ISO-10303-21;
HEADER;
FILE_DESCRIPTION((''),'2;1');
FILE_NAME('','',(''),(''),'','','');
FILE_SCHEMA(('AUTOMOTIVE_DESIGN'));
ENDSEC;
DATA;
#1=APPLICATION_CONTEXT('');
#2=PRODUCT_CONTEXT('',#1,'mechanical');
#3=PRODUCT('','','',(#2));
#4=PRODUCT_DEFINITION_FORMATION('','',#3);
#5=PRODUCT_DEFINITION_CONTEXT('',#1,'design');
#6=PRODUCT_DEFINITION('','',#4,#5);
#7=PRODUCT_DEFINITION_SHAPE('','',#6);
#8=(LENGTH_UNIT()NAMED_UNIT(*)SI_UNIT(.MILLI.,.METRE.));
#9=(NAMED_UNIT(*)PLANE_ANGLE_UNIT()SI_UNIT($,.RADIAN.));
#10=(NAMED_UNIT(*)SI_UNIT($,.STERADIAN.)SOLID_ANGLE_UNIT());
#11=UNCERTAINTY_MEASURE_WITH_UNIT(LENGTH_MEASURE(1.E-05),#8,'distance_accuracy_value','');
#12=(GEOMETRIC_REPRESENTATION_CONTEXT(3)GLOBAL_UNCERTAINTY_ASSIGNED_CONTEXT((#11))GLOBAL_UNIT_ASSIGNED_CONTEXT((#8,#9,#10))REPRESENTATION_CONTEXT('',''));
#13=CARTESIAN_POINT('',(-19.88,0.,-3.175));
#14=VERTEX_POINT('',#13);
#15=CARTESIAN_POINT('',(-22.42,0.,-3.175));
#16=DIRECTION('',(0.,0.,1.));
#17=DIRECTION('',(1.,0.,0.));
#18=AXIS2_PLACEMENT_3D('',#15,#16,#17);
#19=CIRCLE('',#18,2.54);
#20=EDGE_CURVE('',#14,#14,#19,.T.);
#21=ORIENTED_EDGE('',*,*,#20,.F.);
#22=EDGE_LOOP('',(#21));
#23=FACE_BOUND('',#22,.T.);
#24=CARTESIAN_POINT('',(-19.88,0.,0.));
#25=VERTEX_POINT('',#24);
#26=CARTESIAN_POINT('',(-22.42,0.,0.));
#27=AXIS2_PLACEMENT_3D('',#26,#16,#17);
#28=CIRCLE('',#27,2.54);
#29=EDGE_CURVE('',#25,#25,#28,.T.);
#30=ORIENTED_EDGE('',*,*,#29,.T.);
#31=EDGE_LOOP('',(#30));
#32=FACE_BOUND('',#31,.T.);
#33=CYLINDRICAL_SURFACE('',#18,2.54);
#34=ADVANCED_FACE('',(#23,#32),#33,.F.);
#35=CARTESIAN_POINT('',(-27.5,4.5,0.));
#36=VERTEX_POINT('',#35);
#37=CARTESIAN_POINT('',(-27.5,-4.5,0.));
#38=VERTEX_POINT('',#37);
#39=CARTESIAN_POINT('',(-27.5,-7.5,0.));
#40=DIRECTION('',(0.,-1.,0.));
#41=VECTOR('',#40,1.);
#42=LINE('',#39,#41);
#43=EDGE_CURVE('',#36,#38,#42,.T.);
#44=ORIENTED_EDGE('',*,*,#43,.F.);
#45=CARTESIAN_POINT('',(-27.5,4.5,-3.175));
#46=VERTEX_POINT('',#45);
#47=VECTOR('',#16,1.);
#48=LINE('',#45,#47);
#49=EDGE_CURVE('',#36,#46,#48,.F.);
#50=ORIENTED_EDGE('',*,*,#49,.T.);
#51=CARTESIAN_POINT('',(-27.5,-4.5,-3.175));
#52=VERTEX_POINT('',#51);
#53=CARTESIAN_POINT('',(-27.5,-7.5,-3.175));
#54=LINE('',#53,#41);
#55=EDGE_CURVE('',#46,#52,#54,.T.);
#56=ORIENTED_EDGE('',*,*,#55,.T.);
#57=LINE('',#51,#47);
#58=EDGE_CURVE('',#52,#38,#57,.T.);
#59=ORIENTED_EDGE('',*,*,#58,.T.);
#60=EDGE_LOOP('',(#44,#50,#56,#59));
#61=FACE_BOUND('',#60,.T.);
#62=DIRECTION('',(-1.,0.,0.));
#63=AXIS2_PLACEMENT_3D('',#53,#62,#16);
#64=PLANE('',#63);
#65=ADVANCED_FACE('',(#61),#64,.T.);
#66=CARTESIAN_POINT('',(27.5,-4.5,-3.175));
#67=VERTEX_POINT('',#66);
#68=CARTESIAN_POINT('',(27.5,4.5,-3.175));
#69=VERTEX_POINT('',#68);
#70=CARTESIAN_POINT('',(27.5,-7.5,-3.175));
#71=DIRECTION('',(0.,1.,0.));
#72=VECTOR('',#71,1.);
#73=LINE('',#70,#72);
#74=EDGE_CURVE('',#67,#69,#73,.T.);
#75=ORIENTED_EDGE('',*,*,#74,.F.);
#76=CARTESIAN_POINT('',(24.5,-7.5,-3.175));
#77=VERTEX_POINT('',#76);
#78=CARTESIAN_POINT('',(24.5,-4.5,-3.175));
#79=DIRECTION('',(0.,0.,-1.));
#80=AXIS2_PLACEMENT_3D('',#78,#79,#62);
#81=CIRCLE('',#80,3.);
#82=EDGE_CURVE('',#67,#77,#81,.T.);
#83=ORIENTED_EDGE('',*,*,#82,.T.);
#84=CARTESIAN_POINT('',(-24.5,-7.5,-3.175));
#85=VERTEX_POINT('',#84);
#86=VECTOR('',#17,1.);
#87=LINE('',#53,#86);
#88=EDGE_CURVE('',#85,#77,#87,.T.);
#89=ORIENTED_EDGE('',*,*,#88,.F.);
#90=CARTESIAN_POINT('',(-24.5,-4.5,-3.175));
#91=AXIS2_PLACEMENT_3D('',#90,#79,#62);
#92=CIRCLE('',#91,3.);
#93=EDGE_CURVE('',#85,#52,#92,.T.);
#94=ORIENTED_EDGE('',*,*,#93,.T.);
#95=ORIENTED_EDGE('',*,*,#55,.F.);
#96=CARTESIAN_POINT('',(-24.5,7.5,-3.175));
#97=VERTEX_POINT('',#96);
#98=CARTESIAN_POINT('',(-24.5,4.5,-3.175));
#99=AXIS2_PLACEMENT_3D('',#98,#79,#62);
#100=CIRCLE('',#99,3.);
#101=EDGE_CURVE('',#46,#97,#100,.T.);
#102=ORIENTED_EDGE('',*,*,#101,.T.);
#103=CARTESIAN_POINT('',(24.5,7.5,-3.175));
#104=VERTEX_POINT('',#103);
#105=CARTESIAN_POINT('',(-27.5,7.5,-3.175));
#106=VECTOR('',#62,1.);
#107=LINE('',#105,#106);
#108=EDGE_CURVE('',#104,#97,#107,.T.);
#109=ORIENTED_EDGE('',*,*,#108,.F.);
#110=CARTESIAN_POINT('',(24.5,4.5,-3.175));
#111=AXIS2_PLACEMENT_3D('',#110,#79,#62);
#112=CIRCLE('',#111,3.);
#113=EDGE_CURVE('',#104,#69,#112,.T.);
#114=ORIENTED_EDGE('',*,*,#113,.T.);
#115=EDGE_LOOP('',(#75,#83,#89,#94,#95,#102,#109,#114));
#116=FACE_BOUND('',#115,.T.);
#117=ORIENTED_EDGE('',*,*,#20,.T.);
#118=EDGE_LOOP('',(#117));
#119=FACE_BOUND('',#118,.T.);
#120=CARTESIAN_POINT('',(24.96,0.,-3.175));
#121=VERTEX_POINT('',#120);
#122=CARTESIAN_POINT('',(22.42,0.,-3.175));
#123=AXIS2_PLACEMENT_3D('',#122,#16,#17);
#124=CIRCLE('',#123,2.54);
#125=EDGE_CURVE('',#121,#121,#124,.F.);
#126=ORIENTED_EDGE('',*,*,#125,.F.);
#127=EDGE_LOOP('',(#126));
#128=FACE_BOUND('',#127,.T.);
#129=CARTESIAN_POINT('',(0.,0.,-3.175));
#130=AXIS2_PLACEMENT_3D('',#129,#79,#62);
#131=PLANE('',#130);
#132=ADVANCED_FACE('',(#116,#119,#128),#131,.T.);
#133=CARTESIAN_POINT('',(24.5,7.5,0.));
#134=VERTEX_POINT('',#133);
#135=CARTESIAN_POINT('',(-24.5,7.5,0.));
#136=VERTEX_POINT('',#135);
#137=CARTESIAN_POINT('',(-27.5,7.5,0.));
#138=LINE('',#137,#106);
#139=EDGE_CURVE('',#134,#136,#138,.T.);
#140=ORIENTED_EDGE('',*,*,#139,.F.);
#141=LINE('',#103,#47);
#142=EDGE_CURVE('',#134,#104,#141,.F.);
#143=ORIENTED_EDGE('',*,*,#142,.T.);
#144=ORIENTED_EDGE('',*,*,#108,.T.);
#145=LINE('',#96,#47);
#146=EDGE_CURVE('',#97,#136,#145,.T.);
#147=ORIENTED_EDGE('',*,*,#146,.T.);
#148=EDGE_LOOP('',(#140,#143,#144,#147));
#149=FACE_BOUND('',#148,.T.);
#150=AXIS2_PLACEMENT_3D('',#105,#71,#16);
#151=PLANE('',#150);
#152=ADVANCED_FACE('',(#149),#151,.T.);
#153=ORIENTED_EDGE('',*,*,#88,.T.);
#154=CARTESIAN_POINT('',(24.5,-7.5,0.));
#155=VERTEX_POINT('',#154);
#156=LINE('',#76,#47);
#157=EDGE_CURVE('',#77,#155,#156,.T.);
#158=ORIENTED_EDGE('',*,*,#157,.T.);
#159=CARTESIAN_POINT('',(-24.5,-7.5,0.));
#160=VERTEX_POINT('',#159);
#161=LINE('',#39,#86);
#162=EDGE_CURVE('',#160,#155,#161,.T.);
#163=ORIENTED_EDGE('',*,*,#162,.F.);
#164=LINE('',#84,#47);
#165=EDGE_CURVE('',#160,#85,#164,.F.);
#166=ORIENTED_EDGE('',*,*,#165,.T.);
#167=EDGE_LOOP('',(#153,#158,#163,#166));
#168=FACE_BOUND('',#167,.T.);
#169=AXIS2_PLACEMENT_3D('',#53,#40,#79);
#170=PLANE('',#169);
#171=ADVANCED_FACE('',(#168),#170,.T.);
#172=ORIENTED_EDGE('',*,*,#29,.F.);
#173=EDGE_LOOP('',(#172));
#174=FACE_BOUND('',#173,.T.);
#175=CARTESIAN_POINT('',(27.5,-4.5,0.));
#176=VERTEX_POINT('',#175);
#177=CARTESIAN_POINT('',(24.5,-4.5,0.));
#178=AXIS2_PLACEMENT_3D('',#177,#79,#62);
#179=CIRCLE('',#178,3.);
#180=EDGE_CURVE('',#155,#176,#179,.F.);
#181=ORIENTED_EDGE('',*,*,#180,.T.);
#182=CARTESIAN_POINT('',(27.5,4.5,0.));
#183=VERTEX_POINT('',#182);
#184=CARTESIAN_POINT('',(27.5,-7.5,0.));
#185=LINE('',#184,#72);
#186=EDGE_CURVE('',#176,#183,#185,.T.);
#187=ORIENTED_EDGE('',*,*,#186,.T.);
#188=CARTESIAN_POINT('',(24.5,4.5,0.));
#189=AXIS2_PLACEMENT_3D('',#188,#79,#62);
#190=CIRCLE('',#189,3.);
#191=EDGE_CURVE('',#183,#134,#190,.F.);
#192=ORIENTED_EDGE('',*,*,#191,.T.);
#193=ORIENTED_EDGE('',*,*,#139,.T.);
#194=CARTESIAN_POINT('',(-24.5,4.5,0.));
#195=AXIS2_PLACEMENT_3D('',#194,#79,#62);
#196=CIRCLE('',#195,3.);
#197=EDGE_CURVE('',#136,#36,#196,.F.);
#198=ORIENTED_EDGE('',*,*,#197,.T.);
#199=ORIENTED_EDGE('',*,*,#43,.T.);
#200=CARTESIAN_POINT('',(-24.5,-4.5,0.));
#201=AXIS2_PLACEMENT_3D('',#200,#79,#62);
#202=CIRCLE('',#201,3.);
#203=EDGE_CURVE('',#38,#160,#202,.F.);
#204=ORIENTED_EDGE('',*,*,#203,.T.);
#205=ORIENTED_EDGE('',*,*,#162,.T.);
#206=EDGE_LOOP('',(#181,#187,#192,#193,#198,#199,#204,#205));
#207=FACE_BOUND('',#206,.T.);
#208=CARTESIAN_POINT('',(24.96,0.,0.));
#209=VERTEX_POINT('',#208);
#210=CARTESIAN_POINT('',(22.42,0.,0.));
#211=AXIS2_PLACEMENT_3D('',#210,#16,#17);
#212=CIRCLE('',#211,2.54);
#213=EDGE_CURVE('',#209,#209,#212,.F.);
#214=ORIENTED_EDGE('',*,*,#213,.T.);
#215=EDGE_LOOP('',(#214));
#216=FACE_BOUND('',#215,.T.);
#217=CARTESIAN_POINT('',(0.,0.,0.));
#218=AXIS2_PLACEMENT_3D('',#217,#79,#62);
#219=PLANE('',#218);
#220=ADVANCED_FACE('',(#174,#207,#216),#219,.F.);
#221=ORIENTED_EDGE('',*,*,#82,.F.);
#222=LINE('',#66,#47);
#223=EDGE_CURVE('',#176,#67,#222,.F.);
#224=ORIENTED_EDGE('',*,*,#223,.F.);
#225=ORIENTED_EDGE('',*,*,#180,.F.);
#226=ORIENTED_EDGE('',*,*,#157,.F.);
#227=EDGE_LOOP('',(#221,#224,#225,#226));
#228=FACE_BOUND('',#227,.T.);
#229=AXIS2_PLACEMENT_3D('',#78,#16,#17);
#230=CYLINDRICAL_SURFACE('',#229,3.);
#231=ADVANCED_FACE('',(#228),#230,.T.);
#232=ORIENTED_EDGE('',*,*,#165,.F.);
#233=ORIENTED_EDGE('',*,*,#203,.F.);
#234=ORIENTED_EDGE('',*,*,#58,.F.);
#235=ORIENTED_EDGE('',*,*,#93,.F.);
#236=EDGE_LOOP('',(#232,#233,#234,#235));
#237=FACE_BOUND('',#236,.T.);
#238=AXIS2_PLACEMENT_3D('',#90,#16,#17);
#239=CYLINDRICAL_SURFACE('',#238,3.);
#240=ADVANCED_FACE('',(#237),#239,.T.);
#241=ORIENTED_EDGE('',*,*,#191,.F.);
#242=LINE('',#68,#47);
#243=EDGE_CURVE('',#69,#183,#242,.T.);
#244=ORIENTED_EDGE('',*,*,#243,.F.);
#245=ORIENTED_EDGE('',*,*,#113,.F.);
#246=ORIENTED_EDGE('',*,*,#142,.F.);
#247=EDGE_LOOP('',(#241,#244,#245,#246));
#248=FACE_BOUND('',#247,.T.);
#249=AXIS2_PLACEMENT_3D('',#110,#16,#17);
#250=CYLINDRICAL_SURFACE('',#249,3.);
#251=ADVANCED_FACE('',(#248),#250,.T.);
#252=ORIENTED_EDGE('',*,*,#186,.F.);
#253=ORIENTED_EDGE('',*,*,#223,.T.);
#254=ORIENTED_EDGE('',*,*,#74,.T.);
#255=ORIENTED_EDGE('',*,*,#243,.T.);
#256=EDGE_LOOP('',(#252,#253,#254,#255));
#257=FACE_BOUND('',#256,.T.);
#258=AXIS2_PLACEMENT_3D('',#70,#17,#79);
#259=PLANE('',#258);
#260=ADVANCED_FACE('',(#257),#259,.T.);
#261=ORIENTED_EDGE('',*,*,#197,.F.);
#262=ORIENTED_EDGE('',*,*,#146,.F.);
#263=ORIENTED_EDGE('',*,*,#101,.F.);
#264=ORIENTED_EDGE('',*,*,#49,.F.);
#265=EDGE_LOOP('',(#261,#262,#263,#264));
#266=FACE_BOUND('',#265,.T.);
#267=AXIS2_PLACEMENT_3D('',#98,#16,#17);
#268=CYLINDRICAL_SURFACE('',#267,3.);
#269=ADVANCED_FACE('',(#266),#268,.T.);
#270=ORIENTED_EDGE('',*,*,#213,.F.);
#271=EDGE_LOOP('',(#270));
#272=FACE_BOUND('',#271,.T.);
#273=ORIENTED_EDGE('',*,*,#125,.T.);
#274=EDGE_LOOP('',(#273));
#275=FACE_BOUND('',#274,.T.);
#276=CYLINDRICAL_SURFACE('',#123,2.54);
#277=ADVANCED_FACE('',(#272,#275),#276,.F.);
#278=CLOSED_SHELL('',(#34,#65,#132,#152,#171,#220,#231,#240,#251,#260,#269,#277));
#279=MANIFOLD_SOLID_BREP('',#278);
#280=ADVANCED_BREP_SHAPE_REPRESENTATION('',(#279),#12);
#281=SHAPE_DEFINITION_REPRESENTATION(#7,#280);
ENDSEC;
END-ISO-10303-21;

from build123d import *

# Parameters (mm, degrees)
SKETCH1_W          = 55
SKETCH1_H          = 15
BASE_FLANGE1_DEPTH = 3.175
FILLET1_R          = 3
SKETCH7_R          = 2.54
CUT_EXTRUDE1_DEPTH = 29.680666397


# Sheet-metal steps are written as plain solids
with BuildPart() as part:
    # Sketch1 → Base-Flange1 (new body)
    with BuildSketch(Plane.XY):
        Rectangle(SKETCH1_W, SKETCH1_H)
    extrude(amount=-BASE_FLANGE1_DEPTH)

    # Fillet1
    fillet1_edges = [part.edges().sort_by_distance(p)[0] for p in [
        (27.5, -7.5, -1.5875),
        (-27.5, -7.5, -1.5875),
        (-27.5, 7.5, -1.5875),
        (27.5, 7.5, -1.5875),
    ]]
    fillet(fillet1_edges, radius=FILLET1_R)

    # Sketch7 → Cut-Extrude1 (cut, through all)
    with BuildSketch(Plane.XY):
        with Locations((-22.42, 0)):
            Circle(SKETCH7_R)
        with Locations((22.42, 0)):
            Circle(SKETCH7_R)
    extrude(amount=-CUT_EXTRUDE1_DEPTH, mode=Mode.SUBTRACT)


solid = part.part
